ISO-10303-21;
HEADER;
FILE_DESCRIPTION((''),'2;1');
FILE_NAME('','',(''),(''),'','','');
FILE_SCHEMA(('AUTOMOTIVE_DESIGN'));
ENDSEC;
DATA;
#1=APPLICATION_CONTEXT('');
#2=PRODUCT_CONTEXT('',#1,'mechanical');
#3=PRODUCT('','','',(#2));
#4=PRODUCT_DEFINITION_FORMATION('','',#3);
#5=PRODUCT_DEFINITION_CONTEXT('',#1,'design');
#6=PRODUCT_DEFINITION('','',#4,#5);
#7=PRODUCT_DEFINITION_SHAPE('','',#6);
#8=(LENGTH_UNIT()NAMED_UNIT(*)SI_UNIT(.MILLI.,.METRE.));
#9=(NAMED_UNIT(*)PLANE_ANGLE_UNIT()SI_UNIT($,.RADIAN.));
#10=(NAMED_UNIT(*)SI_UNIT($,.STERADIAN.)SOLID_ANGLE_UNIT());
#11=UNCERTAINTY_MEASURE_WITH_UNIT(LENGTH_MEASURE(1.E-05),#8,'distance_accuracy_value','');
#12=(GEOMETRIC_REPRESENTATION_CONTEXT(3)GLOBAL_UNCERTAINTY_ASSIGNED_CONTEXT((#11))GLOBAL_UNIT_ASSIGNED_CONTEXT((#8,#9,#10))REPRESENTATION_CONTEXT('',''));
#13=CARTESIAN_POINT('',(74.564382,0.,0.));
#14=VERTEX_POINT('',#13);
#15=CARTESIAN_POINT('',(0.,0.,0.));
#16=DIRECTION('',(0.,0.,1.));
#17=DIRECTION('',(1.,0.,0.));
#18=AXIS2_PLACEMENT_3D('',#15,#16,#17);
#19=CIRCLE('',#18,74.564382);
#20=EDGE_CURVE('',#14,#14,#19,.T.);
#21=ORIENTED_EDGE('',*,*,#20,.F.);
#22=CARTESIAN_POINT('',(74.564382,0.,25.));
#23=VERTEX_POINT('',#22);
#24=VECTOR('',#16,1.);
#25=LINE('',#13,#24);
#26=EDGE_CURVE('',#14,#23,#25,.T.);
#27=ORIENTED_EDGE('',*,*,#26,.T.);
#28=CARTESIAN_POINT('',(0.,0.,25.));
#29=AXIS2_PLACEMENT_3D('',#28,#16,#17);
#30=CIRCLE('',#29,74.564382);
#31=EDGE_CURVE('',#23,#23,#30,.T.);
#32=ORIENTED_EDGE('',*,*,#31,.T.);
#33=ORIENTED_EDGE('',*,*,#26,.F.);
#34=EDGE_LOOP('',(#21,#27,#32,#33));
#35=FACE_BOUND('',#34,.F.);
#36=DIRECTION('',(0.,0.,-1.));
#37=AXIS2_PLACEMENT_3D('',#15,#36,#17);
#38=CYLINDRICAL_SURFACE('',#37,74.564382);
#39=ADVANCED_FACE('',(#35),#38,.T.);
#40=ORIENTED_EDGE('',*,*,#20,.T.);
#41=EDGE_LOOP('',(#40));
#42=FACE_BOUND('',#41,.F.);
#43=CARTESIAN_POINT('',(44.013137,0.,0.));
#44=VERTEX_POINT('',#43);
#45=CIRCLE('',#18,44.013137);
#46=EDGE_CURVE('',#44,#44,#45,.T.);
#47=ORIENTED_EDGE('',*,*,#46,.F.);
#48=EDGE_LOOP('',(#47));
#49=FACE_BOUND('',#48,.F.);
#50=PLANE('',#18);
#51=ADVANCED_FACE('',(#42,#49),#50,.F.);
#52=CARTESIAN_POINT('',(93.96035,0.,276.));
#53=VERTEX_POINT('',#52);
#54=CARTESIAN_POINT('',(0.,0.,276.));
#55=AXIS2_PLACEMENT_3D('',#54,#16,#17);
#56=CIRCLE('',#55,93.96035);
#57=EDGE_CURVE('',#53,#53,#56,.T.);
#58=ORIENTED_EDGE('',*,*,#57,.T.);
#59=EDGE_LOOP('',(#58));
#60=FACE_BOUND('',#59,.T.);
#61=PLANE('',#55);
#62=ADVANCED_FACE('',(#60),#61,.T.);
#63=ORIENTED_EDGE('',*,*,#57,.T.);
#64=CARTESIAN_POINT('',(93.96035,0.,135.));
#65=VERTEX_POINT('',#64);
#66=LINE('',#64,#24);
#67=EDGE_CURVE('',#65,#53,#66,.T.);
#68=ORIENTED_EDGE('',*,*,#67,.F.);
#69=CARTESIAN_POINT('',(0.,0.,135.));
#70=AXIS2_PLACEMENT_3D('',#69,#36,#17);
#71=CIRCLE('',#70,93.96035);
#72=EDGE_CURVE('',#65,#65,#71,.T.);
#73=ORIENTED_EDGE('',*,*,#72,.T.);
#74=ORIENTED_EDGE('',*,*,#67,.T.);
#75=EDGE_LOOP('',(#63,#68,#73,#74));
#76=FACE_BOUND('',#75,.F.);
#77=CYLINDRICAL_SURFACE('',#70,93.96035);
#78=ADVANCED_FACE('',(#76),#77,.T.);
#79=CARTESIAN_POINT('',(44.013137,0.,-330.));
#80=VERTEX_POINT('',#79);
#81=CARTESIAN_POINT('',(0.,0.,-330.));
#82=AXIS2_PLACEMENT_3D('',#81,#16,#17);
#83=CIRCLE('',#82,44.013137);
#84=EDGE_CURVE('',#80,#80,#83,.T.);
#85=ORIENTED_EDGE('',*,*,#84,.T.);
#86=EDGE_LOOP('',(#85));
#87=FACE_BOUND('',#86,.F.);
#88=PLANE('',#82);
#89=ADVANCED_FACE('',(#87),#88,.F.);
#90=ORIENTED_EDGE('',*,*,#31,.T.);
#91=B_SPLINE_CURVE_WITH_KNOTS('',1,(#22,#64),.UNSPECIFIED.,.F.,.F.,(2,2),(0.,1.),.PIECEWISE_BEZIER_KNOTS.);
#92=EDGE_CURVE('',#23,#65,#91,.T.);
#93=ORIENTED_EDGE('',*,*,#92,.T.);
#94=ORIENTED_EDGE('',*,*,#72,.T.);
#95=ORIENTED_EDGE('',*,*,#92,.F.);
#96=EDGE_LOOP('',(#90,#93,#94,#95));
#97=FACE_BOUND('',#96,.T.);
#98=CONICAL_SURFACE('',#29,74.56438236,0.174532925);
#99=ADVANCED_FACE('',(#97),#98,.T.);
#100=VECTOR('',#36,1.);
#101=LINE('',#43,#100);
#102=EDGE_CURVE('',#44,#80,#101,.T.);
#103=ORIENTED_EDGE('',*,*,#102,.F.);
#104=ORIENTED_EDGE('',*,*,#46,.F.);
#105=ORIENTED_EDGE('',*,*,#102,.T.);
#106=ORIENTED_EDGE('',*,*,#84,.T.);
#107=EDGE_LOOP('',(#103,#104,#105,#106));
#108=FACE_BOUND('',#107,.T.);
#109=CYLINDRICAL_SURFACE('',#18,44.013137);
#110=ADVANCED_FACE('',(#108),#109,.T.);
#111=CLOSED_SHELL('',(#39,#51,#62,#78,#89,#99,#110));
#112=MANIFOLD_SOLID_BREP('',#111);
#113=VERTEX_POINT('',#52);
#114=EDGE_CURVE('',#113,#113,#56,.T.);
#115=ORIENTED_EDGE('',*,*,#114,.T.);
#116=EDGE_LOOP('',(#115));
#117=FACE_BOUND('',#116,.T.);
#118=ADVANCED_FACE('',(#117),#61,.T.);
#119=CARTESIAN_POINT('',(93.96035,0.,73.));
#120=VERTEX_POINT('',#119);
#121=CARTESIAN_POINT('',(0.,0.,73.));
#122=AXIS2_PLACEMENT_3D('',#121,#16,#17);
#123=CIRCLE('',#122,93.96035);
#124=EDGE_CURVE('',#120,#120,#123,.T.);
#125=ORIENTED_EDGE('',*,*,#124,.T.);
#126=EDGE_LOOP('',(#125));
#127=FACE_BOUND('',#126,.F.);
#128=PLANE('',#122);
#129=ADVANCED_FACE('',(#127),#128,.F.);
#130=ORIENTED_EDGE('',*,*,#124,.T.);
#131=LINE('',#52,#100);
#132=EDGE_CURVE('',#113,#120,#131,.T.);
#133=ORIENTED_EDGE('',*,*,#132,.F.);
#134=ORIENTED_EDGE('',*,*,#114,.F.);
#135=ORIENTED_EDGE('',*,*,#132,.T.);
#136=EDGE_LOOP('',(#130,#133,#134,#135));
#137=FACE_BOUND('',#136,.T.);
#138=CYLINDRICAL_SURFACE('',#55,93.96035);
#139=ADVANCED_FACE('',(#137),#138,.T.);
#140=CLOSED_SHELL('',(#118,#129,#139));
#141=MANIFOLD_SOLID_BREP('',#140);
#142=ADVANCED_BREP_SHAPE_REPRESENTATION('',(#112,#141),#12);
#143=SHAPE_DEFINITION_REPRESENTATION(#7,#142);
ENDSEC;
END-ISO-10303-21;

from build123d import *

# Parameters (mm, degrees)
F0_R      = 74.5643823595
F1_DEPTH  = 25
F1_FACE_R = 74.5643823595
F2_DEPTH  = 110
F2_TAPER  = -10
F3_R      = 57.2567690905
F2_FACE_R = 93.9603502375
F4_DEPTH  = 141
F5_R      = 44.0131368503
F6_DEPTH  = 330
F7_DEPTH  = 203


# Not quite as in the source:
# - a feature names something its author has since deleted; it is built from what else it names


with BuildPart() as f1:
    # F0 (on Top) → F1 (new body)
    with BuildSketch(Plane.XY):
        Circle(F0_R)
    extrude(amount=F1_DEPTH)

    # F1_face (on face) → F2 (join)
    with BuildSketch(Plane.XY.offset(25)):
        Circle(F1_FACE_R)
    extrude(amount=F2_DEPTH, taper=F2_TAPER)

    # F3 (on Top) + F2_face (on face) → F4 (join)
    with BuildSketch(Plane.XY):
        Circle(F3_R)
    with BuildSketch(Plane.XY.offset(135)):
        Circle(F2_FACE_R)
    extrude(amount=F4_DEPTH)

    # F5 (on Top) → F6 (join)
    with BuildSketch(Plane.XY):
        Circle(F5_R)
    extrude(amount=-F6_DEPTH)


with BuildPart() as f7:
    # F7 (new): a face of the model
    f7_faces = [f1.part.faces().sort_by_distance(p)[0] for p in [
        (0, 0, 276),
    ]]
    extrude(f7_faces, amount=-F7_DEPTH)


solid = Compound([f1.part, f7.part])
